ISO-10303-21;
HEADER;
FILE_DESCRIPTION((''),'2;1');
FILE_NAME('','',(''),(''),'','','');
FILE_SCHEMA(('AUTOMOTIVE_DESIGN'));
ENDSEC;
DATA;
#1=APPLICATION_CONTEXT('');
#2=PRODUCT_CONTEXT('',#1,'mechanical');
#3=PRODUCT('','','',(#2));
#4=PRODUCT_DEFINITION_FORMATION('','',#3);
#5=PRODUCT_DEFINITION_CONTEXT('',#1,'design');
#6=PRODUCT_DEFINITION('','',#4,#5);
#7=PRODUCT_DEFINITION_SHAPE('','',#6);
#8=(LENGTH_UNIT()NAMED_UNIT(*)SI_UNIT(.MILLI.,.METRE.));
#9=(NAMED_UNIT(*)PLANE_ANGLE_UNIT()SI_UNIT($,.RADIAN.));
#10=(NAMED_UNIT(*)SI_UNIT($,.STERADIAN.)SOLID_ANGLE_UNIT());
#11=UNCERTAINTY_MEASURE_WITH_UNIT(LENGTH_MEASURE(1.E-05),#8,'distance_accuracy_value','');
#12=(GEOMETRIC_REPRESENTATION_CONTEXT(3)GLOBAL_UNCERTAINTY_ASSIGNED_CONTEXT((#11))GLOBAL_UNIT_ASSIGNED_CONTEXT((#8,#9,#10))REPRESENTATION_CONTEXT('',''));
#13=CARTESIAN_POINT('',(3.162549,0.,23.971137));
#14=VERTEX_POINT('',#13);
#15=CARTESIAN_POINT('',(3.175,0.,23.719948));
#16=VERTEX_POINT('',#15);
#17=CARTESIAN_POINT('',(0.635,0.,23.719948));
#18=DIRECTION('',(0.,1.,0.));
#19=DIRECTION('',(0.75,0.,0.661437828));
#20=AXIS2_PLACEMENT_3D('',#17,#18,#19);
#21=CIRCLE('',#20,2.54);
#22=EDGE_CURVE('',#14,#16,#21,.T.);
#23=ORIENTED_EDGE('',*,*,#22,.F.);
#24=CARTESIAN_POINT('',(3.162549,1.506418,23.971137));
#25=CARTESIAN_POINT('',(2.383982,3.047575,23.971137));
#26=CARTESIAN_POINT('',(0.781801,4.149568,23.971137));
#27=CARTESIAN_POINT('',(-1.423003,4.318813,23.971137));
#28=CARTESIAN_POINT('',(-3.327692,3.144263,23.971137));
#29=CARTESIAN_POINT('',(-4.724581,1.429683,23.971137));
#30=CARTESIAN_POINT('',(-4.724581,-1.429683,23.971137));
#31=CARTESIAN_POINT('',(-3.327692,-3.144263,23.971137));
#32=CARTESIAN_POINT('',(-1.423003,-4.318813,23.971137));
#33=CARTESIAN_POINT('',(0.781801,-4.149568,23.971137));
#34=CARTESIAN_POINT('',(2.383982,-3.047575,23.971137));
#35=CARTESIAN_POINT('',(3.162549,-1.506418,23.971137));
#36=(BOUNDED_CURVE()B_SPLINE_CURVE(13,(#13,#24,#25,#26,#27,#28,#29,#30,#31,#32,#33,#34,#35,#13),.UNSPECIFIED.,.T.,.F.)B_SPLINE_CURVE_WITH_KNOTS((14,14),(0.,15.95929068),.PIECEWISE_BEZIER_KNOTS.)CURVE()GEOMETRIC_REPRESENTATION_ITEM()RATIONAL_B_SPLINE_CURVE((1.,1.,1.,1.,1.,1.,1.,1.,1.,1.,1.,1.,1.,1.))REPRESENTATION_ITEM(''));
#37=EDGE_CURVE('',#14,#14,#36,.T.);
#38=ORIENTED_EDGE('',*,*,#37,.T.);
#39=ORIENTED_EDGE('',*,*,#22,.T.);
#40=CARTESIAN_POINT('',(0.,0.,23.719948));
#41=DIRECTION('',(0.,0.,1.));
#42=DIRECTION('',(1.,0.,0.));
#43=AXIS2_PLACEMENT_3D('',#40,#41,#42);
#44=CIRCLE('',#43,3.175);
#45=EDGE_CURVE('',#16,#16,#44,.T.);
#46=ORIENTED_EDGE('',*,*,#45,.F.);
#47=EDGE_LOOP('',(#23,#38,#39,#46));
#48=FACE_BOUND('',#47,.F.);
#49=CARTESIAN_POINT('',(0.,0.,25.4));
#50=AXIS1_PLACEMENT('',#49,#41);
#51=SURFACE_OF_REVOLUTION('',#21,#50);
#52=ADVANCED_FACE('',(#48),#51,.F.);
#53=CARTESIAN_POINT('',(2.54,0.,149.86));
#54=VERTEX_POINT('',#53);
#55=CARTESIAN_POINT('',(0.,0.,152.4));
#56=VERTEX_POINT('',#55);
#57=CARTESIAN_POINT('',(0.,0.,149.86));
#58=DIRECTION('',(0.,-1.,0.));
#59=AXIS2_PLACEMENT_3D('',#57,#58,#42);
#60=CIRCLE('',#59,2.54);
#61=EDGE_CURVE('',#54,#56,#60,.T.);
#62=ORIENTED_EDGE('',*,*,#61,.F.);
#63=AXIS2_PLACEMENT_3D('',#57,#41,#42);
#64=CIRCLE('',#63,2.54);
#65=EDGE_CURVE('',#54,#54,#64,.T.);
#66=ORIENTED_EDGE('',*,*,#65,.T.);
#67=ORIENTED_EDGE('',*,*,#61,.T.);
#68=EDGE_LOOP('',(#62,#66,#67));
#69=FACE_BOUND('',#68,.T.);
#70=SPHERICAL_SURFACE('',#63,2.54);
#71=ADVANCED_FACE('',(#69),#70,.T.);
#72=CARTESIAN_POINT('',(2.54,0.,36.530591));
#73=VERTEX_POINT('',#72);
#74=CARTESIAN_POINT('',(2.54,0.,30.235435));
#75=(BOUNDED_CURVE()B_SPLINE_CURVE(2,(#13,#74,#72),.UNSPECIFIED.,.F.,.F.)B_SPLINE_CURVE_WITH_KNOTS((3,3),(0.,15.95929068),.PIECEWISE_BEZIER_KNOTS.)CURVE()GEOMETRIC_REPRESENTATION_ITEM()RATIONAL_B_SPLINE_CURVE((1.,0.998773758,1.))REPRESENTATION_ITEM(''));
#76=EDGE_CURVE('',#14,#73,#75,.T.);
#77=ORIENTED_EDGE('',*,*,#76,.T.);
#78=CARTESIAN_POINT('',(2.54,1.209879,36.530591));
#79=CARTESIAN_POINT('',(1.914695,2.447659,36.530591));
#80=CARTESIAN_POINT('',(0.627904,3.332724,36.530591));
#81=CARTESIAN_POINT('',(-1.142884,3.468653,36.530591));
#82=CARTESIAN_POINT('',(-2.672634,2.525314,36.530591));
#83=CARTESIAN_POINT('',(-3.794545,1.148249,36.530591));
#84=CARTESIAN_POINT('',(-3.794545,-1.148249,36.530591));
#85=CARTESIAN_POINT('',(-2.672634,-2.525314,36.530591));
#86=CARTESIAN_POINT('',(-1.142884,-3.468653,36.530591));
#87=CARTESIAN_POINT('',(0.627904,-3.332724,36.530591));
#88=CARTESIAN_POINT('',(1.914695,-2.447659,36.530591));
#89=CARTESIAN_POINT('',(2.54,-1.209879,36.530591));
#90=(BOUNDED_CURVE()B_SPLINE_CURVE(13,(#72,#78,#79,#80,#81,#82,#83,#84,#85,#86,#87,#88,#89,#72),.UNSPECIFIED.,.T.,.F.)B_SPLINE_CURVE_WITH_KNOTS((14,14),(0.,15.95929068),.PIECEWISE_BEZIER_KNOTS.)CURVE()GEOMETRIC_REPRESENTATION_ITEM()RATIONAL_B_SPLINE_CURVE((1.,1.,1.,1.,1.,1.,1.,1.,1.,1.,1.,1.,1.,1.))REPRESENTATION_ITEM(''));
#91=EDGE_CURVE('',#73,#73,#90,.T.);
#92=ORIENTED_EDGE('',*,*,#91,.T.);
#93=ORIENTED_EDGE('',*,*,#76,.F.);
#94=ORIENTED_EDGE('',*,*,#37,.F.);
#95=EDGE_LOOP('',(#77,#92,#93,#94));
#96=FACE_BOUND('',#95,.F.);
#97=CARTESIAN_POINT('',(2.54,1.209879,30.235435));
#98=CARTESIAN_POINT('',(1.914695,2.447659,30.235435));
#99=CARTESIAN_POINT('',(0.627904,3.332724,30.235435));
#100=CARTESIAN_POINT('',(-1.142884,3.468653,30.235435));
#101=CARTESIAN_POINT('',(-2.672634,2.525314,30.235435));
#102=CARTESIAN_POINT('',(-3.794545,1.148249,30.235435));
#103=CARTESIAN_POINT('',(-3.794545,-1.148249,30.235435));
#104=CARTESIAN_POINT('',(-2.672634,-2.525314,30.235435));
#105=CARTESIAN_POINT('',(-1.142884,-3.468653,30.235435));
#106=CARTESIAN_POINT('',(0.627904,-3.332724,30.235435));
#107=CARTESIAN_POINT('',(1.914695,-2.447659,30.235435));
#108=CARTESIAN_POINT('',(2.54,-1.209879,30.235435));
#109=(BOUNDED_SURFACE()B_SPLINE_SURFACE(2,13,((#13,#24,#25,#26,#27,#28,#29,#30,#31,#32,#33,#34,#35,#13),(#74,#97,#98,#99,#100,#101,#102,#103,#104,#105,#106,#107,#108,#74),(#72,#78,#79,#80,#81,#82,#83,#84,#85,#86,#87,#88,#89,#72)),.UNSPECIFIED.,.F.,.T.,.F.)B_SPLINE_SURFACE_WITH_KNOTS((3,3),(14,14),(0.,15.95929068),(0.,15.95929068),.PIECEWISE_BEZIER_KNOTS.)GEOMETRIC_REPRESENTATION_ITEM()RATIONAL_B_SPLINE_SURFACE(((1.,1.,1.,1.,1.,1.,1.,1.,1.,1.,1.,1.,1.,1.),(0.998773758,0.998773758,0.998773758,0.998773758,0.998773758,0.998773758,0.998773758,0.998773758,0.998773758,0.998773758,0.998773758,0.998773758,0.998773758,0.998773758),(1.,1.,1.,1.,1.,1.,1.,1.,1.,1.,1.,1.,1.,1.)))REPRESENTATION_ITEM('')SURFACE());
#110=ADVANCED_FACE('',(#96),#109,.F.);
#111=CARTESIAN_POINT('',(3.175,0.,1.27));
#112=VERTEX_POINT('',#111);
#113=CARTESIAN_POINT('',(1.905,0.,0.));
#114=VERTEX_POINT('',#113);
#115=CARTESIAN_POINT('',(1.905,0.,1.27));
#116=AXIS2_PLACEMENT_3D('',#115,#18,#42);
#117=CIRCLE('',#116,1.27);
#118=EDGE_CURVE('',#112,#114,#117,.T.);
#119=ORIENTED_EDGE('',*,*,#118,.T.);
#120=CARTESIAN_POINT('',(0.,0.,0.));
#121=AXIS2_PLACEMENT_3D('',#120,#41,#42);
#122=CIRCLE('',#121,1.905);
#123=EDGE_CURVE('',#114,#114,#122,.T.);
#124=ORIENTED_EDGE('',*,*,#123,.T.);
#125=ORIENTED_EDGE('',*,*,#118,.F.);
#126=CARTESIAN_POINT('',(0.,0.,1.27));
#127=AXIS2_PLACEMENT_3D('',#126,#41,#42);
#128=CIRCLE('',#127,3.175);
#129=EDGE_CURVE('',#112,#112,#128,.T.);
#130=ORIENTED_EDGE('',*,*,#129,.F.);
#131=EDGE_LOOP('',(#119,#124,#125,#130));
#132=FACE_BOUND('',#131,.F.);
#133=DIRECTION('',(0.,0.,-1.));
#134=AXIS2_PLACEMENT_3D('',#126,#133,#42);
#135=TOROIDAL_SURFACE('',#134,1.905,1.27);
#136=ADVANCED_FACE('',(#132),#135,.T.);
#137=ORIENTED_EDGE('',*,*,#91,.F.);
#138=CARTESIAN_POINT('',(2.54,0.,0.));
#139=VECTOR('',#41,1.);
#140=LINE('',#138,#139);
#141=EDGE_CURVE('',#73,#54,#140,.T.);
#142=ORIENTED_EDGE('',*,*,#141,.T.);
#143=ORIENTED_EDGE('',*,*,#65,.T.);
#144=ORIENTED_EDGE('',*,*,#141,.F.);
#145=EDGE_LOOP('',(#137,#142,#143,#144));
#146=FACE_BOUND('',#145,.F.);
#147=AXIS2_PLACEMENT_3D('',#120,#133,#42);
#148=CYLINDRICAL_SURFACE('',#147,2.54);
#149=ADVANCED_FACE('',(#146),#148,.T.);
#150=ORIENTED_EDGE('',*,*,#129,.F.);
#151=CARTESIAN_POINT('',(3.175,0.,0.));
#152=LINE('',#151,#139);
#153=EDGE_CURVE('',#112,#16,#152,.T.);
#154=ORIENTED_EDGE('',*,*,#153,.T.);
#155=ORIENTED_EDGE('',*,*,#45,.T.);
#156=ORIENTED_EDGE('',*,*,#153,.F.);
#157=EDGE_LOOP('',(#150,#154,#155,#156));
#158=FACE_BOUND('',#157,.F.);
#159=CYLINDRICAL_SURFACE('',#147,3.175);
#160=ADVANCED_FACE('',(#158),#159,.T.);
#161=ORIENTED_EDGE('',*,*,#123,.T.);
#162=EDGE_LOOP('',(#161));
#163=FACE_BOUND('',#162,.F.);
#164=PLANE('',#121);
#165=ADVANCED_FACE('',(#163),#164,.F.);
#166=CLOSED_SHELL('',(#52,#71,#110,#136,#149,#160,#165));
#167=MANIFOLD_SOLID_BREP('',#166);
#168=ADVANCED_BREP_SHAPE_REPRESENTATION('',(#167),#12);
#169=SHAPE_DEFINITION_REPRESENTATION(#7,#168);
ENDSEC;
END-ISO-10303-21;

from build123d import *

# Parameters (mm, degrees)
F0_R     = 2.54
F1_DEPTH = 152.4
F2_R     = 2.54
F0_R_2   = 3.175
F3_DEPTH = 25.4
F5_R     = 127
F6_R     = 1.27


# Not quite as in the source:
# - a fillet or chamfer that OpenCascade refuses, or shapes differently, is made with other operations: its cross-section is extruded or revolved along the edge and cut away or added


with BuildPart() as f1:
    # F0 (on Top) → F1 (new body)
    with BuildSketch(Plane.XY):
        Circle(F0_R)
    extrude(amount=F1_DEPTH)

    # F2
    f2_edges = [f1.edges().sort_by_distance(p)[0] for p in [
        (-2.54, 0, 152.4),
    ]]
    fillet(f2_edges, radius=F2_R)

    # F0 (on Top) → F3 (join)
    with BuildSketch(Plane.XY):
        Circle(F0_R_2)
        Circle(F0_R, mode=Mode.SUBTRACT)
    extrude(amount=F3_DEPTH)

    # F4: fillet of radius 2.54 on 1 edges, made by hand

    # F4_s1 → F4_t2 (revolve, cut)
    with BuildSketch(Plane.XZ):
        with BuildLine():
            ThreePointArc((2.54, 25.4), (3.0109524406, 24.6179735296), (3.175, 23.7199479175))
            Line((3.175, 23.7199479175), (3.175, 25.4))
            Line((3.175, 25.4), (2.54, 25.4))
        make_face()
    revolve(axis=Axis((0, 0, 25.4), (0, 0, 1)), mode=Mode.SUBTRACT)

    # F5
    f5_edges = [f1.edges().sort_by_distance(p)[0] for p in [
        (-2.54, 0, 25.4),
    ]]
    fillet(f5_edges, radius=F5_R)

    # F6
    f6_edges = [f1.edges().sort_by_distance(p)[0] for p in [
        (-3.175, 0, 0),
    ]]
    fillet(f6_edges, radius=F6_R)


solid = f1.part
